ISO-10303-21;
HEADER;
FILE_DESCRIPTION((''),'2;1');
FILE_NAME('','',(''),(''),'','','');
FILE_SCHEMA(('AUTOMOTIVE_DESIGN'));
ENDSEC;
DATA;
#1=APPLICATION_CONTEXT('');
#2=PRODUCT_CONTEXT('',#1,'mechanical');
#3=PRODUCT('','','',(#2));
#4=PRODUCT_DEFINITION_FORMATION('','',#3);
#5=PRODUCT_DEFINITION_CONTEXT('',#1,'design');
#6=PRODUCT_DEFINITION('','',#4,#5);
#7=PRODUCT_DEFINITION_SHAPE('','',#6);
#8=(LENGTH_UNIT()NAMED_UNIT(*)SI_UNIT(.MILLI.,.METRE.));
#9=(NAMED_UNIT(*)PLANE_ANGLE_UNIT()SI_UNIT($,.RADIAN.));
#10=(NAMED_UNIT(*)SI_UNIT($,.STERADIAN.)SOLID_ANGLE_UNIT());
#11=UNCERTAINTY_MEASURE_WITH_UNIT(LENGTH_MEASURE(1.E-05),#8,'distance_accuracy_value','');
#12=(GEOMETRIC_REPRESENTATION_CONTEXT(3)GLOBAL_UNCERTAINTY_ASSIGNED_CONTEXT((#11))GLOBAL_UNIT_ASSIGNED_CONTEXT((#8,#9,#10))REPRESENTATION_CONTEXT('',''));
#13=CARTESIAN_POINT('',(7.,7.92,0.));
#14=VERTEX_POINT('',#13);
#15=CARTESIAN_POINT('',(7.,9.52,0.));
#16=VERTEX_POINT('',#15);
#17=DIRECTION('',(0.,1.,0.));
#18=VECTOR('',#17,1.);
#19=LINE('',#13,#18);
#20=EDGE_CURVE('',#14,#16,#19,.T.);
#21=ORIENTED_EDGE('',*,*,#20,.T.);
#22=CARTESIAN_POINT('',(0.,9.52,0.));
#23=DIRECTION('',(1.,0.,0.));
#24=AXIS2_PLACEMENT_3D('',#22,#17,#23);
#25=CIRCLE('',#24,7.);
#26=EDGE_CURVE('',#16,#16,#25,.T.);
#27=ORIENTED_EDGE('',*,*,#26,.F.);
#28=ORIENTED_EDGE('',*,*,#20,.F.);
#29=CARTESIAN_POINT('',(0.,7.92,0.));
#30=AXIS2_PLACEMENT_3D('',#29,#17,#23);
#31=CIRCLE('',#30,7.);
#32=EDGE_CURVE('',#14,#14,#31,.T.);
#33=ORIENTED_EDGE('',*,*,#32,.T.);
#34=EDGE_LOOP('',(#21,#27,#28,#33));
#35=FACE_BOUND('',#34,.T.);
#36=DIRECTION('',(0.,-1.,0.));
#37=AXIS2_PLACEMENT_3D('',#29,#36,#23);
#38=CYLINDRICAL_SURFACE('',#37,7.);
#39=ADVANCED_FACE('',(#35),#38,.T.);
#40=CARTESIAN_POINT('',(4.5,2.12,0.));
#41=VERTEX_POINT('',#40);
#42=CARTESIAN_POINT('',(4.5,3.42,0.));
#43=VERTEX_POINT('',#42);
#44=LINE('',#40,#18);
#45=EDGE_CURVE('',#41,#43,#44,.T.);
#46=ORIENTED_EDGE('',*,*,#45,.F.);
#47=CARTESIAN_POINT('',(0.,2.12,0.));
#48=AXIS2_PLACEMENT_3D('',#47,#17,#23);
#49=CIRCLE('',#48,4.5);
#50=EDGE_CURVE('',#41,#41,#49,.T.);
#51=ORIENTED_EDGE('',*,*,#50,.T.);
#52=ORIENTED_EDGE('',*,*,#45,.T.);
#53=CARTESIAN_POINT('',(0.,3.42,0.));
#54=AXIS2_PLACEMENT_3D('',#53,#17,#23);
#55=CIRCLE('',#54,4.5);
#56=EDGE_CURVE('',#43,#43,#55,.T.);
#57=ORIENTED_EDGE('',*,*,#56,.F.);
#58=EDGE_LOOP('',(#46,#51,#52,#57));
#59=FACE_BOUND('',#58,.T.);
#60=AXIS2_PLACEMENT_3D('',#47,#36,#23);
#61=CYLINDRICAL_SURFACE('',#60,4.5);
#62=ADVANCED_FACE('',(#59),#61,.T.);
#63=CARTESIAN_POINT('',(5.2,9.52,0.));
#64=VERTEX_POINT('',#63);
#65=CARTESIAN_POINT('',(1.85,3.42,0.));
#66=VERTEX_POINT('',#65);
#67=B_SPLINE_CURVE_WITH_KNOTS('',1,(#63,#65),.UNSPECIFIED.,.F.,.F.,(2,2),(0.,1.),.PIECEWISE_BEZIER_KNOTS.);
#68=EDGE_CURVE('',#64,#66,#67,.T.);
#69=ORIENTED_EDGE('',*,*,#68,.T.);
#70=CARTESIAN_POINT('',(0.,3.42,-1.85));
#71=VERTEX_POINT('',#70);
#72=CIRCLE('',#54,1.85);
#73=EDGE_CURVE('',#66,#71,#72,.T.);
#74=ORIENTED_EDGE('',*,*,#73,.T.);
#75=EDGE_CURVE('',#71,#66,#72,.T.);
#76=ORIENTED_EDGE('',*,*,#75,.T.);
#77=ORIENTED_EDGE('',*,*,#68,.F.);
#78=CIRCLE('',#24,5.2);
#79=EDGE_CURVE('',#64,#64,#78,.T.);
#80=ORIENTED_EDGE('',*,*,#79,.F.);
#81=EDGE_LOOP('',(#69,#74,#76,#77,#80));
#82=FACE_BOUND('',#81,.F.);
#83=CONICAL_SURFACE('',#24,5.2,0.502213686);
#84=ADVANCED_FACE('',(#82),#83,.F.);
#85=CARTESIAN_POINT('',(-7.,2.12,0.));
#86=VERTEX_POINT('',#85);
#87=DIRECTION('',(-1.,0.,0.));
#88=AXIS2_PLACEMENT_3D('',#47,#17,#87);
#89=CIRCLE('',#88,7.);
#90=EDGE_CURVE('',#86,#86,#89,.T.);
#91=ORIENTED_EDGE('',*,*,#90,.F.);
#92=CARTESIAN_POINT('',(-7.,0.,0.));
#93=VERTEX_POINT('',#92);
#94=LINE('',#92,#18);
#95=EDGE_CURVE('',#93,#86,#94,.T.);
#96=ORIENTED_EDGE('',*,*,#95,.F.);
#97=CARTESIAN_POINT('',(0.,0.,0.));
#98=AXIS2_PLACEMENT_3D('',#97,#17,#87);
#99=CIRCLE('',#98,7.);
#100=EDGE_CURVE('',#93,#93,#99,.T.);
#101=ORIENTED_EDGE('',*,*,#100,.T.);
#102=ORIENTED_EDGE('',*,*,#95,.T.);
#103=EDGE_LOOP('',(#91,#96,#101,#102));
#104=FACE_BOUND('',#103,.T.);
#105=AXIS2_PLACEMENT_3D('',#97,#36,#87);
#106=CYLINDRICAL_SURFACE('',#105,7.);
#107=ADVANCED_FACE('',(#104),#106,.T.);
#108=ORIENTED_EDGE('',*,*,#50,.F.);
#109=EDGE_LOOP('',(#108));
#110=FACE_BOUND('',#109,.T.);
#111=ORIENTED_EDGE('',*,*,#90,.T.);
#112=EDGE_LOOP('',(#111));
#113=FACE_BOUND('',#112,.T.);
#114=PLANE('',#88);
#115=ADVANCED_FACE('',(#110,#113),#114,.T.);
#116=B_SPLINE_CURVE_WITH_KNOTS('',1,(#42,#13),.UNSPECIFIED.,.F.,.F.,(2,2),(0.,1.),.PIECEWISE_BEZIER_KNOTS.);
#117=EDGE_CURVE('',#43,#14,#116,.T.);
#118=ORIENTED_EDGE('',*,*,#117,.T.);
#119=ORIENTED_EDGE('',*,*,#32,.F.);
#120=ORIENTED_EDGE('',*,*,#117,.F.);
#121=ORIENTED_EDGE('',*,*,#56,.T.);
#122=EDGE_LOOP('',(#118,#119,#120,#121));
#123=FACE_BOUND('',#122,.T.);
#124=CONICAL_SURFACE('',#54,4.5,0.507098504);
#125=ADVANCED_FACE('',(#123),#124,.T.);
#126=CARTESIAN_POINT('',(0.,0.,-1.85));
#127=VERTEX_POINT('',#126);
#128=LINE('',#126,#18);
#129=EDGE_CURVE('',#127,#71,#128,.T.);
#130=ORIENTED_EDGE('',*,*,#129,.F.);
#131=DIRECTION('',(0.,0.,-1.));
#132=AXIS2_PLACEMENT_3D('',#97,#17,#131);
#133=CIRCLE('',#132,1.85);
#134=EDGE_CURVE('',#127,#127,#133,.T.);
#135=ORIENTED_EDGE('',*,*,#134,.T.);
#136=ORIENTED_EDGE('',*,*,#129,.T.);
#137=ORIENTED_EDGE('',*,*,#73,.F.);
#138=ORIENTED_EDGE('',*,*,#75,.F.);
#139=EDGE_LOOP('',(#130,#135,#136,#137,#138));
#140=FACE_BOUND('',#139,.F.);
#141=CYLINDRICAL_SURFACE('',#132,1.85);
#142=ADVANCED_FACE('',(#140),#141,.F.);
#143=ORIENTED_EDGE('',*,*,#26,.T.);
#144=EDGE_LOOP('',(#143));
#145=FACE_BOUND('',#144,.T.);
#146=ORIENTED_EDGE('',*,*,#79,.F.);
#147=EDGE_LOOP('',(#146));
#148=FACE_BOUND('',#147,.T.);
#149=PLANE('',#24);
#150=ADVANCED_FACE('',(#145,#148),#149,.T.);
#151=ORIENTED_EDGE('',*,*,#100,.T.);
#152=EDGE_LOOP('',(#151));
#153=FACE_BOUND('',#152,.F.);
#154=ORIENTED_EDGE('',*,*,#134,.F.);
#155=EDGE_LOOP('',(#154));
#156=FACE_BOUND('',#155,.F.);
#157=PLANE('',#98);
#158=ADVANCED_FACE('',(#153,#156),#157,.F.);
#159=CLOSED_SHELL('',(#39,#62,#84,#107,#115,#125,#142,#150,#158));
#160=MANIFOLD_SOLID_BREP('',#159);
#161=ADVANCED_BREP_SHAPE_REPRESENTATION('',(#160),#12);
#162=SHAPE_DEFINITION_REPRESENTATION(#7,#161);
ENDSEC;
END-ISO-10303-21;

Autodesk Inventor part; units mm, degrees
ref_plane "YZ Plane" through (0, 0, 0) normal (1, 0, 0) x (0, 1, 0)
ref_plane "XZ Plane" through (0, 0, 0) normal (0, 1, 0) x (-1, 0, 0)
sketch "Sketch1" plane through (0, 0, 0) normal (0, 1, 0) x (-1, 0, 0)
  circle A0 centre (0, 0) radius 7
  dimension "d0" = 14
extrude "Extrusion1" add sketch "Sketch1" along normal blind 2.12
sketch "Sketch3" plane through (0, 2.12, 0) normal (0, 1, 0) x (1, 0, 0)
  circle A0 centre (0, 0) radius 4.5
  dimension "d4" = 9
extrude "Extrusion2" add sketch "Sketch3" along normal blind 1.3
ref_plane "Work Plane2" through (0, 7.92, 0) normal (0, 1, 0) x (1, 0, 0)
sketch "Sketch5" plane through (0, 7.92, 0) normal (0, 1, 0) x (1, 0, 0)
  circle A0 centre (0, 0) radius 7
  dimension "d8" = 14
loft "Loft1" add profiles "Sketch5" section 1 edges at (-4.5, 3.42, 0)
sketch "Sketch7" plane through (0, 7.92, 0) normal (0, 1, 0) x (1, 0, 0)
  circle A0 centre (0, 0) radius 7
extrude "Extrusion3" add sketch "Sketch7" along normal blind 1.6
sketch "Sketch8" plane through (0, 9.52, 0) normal (0, 1, 0) x (1, 0, 0)
  circle A0 centre (0, 0) radius 5.2
  dimension "d15" = 10.4
ref_plane "Work Plane3" through (0, 3.42, 0) normal (0, 1, 0) x (1, 0, 0)
sketch "Sketch10" plane through (0, 3.42, 0) normal (0, 1, 0) x (1, 0, 0)
  circle A0 centre (0, 0) radius 1.85
  dimension "d22" = 3.7
loft "Loft3" cut profiles "Sketch8", "Sketch10"
hole "Hole1" at (0, 0, 0) direction (0, 1, 0) diameter 3.7 end through all
equation "\"d34\" = Thickness"
equation "\"BendRadius\" = Thickness"
equation "\"BendReliefWidth\" = Thickness"
equation "\"BendReliefDepth\" = 0.5 * Thickness"
equation "\"CornerReliefSize\" = 4 * Thickness"
equation "\"MinimumRemnant\" = 2 * Thickness"
equation "\"TransitionRadius\" = BendRadius"
equation "\"JacobiRadiusSize\" = Thickness"
equation "\"GapSize\" = Thickness"
equation "\"Thickness\" = 0.5"
